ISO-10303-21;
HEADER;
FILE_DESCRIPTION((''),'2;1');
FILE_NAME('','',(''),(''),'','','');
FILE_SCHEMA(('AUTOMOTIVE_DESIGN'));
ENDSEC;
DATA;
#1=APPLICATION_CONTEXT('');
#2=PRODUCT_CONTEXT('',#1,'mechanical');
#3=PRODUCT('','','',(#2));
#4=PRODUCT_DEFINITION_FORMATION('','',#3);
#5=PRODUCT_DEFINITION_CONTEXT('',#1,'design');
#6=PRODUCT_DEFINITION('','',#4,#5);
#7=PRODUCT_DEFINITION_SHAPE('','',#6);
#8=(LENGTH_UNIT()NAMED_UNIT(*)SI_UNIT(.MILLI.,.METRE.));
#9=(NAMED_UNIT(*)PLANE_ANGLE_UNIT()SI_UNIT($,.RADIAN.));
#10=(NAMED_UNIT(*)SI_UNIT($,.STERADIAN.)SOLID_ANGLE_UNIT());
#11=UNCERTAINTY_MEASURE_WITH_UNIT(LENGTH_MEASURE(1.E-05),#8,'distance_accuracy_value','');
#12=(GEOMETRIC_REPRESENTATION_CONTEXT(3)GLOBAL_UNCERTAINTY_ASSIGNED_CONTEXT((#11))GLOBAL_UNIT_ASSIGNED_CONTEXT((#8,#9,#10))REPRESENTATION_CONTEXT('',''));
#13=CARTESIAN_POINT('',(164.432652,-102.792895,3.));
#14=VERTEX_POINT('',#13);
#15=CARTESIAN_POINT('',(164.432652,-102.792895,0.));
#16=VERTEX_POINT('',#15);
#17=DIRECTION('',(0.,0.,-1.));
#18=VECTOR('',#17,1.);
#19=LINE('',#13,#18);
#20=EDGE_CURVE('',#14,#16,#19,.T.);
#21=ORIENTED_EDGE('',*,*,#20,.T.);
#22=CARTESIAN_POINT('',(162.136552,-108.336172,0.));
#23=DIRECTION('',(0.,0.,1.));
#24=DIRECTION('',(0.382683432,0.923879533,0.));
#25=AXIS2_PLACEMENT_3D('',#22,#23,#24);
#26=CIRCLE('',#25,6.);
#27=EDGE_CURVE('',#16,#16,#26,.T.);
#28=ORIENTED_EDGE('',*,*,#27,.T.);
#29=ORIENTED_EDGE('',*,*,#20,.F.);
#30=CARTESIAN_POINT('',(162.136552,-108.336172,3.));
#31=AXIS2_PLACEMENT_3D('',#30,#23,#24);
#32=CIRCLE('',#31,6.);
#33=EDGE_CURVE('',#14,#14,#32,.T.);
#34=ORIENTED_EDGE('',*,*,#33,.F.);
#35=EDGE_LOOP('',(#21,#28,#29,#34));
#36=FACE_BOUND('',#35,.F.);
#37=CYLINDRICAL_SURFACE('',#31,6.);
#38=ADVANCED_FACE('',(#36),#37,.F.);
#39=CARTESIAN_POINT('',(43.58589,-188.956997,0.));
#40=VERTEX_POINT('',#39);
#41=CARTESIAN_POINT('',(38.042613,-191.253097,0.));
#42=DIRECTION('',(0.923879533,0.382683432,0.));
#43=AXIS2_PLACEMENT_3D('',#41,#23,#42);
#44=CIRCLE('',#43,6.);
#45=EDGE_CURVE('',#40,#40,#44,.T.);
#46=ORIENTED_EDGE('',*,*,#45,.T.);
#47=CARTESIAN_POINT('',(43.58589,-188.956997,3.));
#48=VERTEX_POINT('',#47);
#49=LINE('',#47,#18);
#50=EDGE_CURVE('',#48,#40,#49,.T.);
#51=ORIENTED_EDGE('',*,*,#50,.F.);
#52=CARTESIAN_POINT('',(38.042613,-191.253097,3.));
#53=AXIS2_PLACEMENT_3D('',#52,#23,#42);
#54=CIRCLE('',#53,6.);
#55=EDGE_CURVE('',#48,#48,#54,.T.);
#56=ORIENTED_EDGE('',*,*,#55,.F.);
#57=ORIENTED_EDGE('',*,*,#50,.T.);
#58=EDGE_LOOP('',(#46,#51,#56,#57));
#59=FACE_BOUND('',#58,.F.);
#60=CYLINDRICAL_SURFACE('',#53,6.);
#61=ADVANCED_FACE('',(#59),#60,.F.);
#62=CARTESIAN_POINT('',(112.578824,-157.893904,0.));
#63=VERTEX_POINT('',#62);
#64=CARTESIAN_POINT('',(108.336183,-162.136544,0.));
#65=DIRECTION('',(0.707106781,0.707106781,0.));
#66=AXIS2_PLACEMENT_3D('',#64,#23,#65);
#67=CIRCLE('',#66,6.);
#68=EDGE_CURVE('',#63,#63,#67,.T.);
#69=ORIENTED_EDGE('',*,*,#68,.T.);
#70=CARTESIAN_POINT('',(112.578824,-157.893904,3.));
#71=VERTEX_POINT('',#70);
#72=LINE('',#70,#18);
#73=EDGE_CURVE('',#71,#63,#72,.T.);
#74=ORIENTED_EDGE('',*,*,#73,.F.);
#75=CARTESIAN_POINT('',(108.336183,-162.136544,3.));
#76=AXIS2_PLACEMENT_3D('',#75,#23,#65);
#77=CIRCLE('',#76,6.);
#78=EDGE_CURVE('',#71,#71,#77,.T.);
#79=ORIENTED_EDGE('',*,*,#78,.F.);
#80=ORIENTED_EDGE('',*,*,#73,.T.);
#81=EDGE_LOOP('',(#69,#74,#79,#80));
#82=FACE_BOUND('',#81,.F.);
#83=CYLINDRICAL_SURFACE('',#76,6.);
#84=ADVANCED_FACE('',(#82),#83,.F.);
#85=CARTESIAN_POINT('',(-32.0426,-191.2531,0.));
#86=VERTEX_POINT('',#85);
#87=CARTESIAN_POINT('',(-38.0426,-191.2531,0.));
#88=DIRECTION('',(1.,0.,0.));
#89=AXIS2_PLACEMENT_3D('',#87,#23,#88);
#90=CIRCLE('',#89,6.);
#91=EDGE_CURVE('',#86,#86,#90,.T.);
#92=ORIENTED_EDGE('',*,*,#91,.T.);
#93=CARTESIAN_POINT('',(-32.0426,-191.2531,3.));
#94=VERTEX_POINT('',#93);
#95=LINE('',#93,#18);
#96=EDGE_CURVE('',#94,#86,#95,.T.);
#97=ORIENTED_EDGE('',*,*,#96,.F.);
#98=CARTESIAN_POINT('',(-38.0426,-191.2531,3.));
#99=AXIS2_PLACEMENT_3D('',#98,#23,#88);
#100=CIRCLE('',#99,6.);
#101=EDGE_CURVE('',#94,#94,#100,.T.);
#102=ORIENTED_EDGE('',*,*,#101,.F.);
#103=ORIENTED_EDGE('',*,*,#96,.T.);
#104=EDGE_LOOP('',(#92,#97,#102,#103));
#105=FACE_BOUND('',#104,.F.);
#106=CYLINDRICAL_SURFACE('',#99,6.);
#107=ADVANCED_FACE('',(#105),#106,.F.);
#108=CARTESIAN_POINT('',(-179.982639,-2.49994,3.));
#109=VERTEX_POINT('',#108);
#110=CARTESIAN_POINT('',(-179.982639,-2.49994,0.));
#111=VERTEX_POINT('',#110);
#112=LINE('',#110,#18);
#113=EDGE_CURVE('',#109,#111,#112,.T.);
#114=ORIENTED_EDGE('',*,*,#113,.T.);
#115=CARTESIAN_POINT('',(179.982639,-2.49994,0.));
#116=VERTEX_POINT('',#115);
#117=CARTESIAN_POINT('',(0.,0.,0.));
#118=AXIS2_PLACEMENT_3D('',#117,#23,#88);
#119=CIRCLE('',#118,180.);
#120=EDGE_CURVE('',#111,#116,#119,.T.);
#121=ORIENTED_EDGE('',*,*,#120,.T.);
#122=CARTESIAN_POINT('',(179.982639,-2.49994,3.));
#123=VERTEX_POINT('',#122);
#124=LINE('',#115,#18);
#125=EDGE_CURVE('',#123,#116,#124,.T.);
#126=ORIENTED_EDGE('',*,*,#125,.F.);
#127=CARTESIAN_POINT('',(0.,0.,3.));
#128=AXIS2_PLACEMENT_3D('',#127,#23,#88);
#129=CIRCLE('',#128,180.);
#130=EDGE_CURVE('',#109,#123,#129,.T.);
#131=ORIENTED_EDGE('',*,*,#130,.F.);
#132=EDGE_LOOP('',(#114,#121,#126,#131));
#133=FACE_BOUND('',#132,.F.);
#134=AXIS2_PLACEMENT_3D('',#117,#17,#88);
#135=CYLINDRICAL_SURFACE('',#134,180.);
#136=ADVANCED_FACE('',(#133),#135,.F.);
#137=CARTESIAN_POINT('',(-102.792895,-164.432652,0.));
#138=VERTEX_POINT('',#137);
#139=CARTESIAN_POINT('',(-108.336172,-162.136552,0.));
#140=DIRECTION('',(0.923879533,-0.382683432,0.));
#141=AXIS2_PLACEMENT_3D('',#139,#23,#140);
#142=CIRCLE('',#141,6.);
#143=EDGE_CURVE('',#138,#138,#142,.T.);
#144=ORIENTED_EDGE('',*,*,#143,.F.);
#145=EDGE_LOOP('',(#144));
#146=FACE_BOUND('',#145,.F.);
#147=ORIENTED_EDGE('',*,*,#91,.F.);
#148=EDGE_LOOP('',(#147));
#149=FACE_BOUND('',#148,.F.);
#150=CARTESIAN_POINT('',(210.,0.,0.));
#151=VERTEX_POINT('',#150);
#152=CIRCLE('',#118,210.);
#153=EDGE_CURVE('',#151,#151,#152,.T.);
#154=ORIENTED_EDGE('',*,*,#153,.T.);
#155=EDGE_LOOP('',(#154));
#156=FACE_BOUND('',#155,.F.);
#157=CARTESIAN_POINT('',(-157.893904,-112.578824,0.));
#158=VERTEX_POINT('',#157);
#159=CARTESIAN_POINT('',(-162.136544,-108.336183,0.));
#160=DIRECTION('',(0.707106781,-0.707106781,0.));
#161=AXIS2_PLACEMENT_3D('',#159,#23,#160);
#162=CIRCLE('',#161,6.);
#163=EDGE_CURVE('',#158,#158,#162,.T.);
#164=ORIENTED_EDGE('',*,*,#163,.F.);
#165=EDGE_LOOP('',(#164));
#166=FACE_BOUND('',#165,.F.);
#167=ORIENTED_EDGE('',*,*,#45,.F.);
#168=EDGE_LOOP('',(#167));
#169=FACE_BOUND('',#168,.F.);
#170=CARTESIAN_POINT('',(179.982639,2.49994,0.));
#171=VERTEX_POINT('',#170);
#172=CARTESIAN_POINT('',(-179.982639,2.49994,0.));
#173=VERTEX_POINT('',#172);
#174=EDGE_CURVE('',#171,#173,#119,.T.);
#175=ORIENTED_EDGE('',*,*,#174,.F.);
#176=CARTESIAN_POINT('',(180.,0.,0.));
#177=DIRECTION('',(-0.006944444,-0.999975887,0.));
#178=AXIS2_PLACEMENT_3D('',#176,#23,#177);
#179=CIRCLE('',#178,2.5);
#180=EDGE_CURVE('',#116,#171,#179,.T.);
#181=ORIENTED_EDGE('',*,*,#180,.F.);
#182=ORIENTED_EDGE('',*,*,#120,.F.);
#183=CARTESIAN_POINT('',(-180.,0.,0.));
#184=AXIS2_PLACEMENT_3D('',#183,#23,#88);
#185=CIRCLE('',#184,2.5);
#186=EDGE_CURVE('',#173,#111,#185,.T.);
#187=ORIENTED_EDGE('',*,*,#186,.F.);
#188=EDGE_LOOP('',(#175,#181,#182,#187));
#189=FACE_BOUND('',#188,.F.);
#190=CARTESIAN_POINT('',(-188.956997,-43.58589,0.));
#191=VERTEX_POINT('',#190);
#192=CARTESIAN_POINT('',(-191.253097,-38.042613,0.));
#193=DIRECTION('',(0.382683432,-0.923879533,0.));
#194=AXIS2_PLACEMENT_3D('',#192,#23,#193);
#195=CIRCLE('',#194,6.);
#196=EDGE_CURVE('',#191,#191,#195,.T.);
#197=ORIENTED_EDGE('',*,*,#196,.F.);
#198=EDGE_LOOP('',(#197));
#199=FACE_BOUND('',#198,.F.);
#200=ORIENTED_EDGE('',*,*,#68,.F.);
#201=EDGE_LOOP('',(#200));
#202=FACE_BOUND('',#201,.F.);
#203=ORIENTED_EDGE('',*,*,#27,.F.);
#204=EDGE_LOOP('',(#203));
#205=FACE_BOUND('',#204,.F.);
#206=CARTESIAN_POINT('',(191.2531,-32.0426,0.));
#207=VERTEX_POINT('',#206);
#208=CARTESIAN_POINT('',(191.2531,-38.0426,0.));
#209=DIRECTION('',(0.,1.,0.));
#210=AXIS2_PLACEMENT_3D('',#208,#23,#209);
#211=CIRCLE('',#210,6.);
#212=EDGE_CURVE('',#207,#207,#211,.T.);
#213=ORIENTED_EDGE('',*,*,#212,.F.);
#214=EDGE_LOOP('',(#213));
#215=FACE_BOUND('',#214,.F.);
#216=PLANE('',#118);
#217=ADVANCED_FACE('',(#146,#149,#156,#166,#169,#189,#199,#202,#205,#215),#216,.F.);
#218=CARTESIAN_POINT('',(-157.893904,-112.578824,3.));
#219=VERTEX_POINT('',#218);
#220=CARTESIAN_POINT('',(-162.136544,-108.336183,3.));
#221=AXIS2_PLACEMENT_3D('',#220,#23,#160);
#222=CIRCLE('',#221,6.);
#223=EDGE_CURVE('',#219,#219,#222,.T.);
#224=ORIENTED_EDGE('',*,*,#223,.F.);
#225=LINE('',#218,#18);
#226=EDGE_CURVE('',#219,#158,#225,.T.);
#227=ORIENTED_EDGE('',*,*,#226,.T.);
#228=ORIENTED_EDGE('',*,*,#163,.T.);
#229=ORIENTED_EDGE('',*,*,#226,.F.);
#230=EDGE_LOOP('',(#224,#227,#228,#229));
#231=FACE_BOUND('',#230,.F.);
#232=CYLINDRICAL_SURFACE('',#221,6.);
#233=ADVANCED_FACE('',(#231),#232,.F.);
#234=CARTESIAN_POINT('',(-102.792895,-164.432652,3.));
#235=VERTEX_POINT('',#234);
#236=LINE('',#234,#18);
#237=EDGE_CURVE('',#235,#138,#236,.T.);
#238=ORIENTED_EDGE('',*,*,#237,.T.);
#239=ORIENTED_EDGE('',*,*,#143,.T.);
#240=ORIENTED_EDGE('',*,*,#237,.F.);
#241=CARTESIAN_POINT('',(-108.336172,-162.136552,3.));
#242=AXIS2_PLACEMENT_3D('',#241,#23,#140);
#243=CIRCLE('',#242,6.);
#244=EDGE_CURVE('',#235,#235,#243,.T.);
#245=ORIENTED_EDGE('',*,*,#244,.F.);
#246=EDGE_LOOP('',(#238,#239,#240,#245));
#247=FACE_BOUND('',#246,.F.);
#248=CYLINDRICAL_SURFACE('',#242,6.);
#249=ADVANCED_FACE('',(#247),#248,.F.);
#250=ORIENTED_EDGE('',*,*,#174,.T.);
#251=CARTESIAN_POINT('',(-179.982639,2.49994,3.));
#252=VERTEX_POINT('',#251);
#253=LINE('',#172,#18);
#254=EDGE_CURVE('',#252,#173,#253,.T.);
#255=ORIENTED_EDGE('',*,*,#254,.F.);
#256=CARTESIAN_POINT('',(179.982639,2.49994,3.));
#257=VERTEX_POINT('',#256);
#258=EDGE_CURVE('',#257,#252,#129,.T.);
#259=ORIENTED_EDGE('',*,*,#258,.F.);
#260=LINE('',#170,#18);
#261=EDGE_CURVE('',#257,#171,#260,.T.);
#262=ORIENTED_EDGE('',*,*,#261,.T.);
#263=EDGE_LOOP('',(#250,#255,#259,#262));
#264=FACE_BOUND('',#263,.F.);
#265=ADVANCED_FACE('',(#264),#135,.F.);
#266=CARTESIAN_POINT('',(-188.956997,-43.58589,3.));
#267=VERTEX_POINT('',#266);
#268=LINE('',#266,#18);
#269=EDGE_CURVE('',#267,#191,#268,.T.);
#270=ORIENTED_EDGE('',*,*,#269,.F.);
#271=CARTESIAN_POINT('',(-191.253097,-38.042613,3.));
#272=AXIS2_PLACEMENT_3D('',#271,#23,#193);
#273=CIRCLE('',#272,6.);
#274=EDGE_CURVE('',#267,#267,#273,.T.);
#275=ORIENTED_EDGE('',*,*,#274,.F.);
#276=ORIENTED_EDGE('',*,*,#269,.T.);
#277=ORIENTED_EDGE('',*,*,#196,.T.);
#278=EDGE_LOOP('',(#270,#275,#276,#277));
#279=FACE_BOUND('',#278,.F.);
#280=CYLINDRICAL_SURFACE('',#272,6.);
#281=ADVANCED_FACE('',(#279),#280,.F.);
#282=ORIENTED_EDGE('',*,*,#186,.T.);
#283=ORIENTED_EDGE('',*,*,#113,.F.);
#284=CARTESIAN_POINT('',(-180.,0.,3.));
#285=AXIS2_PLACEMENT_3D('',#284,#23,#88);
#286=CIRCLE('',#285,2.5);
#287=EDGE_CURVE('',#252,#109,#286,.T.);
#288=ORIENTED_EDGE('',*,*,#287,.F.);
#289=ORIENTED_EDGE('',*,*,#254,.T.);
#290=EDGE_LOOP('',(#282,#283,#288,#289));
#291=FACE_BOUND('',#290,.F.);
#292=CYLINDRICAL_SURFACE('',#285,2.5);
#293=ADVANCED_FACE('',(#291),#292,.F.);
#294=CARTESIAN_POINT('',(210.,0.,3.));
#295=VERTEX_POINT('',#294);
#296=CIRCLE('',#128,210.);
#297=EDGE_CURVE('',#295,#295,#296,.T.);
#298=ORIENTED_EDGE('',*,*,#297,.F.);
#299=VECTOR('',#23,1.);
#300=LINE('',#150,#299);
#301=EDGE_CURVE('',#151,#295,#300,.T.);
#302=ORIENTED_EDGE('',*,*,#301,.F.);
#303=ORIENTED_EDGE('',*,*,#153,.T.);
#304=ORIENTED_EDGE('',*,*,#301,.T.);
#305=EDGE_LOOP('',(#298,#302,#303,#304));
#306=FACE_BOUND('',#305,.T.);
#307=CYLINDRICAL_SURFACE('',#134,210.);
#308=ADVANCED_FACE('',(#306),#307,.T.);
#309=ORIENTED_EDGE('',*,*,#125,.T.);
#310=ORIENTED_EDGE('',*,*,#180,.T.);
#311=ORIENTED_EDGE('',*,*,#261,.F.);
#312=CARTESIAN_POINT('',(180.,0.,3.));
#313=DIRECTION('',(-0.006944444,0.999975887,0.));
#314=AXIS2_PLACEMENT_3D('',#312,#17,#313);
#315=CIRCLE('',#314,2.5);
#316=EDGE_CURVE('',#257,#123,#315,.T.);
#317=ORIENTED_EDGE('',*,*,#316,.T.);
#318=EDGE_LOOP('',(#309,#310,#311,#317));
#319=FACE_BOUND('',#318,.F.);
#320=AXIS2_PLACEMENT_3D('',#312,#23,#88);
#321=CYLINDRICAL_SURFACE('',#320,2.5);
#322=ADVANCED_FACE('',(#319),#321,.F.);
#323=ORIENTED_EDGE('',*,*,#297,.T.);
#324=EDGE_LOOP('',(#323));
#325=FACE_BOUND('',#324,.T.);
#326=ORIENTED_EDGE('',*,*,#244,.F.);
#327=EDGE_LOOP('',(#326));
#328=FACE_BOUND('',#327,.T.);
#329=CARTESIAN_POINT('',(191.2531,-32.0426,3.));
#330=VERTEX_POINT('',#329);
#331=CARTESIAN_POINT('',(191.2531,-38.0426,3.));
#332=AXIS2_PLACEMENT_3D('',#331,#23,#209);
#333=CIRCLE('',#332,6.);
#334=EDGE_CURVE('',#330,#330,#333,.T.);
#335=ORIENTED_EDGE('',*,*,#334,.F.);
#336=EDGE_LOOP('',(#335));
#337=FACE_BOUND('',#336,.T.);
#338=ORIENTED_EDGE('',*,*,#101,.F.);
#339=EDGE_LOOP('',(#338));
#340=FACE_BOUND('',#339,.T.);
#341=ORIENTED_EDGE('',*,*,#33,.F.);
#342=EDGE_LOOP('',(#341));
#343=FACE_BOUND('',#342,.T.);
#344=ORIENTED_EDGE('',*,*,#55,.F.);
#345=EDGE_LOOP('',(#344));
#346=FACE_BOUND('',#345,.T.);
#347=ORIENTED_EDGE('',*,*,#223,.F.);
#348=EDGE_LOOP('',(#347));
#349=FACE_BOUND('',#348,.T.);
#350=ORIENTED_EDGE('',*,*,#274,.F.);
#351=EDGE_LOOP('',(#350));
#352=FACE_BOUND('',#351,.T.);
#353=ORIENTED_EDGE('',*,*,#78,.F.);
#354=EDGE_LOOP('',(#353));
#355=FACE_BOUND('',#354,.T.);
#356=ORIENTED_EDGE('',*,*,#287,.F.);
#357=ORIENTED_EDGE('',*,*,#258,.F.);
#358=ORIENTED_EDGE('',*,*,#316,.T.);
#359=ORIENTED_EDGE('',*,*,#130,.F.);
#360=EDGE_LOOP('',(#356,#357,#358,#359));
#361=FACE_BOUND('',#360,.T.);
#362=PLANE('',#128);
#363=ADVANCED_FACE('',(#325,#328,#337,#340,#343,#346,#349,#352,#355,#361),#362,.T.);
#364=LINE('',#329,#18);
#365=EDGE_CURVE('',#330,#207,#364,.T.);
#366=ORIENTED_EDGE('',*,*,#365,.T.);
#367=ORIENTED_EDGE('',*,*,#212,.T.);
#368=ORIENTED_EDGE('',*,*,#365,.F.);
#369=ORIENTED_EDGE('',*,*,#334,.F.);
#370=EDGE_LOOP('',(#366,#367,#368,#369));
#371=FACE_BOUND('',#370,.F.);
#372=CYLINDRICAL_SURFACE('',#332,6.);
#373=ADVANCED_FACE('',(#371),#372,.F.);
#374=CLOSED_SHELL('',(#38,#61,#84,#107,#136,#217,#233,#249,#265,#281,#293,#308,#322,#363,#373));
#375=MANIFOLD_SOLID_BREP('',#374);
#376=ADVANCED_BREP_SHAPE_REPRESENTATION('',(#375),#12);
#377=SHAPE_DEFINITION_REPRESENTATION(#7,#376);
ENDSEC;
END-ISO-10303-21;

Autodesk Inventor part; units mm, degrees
ref_plane "YZ Plane" through (0, 0, 0) normal (1, 0, 0) x (0, 1, 0)
ref_plane "XZ Plane" through (0, 0, 0) normal (0, 1, 0) x (-1, 0, 0)
ref_plane "XY Plane" through (0, 0, 0) normal (0, 0, 1) x (1, 0, 0)
sketch "Sketch1" plane through (0, 0, 0) normal (0, 0, 1) x (1, 0, 0)
  circle A0 centre (0, 0) radius 180
  circle A1 centre (0, 0) radius 210
  circle A2 centre (0, 0) radius 195 construction
  line L0 (0, 210) -> (0, 180) construction
  point P0 (0, 195)
  dimension "d9" = 390
  dimension "d11" = 30
extrude "Plate1" add sketch "Sketch1" along normal blind 3
sketch "Sketch2" plane through (0, 0, 3) normal (0, 0, 1) x (1, 0, 0)
  circle A0 centre (0, 0) radius 180 construction
  circle A1 centre (0, 0) radius 210 construction
  circle A2 centre (0, 0) radius 210 projected
  circle A3 centre (0, 0) radius 180 projected
  line L0 (0, 0) -> (0, -210) construction
  line L1 (0, 0) -> (-40.969, -205.9649) construction
  line L2 (-35.1163, -176.5414) -> (-40.969, -205.9649) construction
  circle A4 centre (-38.0426, -191.2531) radius 6
  dimension "d20" = 11.25
  dimension "d21" = 12
extrude "Extrusion1" cut sketch "Sketch2" against normal through all contours A4
pattern_circular "Circular Pattern1" count 8 over 157.5 about axis through (0, 0, 0) along (0, 0, 1) of "Extrusion1" both ways yes
sketch "Sketch3" plane through (0, 0, 3) normal (0, 0, 1) x (1, 0, 0)
  circle A0 centre (0, 0) radius 180 construction
  line L0 (180, 0) -> (-180, 0) construction
  circle A1 centre (180, 0) radius 2.5
  circle A2 centre (-180, 0) radius 2.5
  circle A3 centre (-161.2452, -80) radius 2.5
  line L1 (-161.2452, -80) -> (161.2452, -80) construction
  circle A4 centre (161.2452, -80) radius 2.5
  dimension "d27" = 5
  dimension "d29" = 80
extrude "Extrusion2" cut sketch "Sketch3" against normal through all contours A1 | A2
equation "\"d9\" = Шпил_пласт_НОС_диам_центров"
equation "\"d11\" = Шпил_пласт_НОС_ширина"
equation "\"d21\" = Шпил_пласт_НОС_диам_шпильки"
equation "\"d2\" = Thickness"
equation "\"BendRadius\" = Thickness"
equation "\"BendReliefWidth\" = Thickness"
equation "\"BendReliefDepth\" = 0.5 * Thickness"
equation "\"CornerReliefSize\" = 4 * Thickness"
equation "\"MinimumRemnant\" = 2 * Thickness"
equation "\"TransitionRadius\" = BendRadius"
equation "\"JacobiRadiusSize\" = BendRadius"
equation "\"GapSize\" = Thickness"
equation "\"Шпил_пласт_НОС_диам_центров\" = 390"
equation "\"Шпил_пласт_НОС_ширина\" = 30"
equation "\"Шпил_пласт_НОС_диам_шпильки\" = 12"
equation "\"Thickness\" = 3"
properties part number "ДМФ 031 кольцо под шпильки НОС v2.0"
